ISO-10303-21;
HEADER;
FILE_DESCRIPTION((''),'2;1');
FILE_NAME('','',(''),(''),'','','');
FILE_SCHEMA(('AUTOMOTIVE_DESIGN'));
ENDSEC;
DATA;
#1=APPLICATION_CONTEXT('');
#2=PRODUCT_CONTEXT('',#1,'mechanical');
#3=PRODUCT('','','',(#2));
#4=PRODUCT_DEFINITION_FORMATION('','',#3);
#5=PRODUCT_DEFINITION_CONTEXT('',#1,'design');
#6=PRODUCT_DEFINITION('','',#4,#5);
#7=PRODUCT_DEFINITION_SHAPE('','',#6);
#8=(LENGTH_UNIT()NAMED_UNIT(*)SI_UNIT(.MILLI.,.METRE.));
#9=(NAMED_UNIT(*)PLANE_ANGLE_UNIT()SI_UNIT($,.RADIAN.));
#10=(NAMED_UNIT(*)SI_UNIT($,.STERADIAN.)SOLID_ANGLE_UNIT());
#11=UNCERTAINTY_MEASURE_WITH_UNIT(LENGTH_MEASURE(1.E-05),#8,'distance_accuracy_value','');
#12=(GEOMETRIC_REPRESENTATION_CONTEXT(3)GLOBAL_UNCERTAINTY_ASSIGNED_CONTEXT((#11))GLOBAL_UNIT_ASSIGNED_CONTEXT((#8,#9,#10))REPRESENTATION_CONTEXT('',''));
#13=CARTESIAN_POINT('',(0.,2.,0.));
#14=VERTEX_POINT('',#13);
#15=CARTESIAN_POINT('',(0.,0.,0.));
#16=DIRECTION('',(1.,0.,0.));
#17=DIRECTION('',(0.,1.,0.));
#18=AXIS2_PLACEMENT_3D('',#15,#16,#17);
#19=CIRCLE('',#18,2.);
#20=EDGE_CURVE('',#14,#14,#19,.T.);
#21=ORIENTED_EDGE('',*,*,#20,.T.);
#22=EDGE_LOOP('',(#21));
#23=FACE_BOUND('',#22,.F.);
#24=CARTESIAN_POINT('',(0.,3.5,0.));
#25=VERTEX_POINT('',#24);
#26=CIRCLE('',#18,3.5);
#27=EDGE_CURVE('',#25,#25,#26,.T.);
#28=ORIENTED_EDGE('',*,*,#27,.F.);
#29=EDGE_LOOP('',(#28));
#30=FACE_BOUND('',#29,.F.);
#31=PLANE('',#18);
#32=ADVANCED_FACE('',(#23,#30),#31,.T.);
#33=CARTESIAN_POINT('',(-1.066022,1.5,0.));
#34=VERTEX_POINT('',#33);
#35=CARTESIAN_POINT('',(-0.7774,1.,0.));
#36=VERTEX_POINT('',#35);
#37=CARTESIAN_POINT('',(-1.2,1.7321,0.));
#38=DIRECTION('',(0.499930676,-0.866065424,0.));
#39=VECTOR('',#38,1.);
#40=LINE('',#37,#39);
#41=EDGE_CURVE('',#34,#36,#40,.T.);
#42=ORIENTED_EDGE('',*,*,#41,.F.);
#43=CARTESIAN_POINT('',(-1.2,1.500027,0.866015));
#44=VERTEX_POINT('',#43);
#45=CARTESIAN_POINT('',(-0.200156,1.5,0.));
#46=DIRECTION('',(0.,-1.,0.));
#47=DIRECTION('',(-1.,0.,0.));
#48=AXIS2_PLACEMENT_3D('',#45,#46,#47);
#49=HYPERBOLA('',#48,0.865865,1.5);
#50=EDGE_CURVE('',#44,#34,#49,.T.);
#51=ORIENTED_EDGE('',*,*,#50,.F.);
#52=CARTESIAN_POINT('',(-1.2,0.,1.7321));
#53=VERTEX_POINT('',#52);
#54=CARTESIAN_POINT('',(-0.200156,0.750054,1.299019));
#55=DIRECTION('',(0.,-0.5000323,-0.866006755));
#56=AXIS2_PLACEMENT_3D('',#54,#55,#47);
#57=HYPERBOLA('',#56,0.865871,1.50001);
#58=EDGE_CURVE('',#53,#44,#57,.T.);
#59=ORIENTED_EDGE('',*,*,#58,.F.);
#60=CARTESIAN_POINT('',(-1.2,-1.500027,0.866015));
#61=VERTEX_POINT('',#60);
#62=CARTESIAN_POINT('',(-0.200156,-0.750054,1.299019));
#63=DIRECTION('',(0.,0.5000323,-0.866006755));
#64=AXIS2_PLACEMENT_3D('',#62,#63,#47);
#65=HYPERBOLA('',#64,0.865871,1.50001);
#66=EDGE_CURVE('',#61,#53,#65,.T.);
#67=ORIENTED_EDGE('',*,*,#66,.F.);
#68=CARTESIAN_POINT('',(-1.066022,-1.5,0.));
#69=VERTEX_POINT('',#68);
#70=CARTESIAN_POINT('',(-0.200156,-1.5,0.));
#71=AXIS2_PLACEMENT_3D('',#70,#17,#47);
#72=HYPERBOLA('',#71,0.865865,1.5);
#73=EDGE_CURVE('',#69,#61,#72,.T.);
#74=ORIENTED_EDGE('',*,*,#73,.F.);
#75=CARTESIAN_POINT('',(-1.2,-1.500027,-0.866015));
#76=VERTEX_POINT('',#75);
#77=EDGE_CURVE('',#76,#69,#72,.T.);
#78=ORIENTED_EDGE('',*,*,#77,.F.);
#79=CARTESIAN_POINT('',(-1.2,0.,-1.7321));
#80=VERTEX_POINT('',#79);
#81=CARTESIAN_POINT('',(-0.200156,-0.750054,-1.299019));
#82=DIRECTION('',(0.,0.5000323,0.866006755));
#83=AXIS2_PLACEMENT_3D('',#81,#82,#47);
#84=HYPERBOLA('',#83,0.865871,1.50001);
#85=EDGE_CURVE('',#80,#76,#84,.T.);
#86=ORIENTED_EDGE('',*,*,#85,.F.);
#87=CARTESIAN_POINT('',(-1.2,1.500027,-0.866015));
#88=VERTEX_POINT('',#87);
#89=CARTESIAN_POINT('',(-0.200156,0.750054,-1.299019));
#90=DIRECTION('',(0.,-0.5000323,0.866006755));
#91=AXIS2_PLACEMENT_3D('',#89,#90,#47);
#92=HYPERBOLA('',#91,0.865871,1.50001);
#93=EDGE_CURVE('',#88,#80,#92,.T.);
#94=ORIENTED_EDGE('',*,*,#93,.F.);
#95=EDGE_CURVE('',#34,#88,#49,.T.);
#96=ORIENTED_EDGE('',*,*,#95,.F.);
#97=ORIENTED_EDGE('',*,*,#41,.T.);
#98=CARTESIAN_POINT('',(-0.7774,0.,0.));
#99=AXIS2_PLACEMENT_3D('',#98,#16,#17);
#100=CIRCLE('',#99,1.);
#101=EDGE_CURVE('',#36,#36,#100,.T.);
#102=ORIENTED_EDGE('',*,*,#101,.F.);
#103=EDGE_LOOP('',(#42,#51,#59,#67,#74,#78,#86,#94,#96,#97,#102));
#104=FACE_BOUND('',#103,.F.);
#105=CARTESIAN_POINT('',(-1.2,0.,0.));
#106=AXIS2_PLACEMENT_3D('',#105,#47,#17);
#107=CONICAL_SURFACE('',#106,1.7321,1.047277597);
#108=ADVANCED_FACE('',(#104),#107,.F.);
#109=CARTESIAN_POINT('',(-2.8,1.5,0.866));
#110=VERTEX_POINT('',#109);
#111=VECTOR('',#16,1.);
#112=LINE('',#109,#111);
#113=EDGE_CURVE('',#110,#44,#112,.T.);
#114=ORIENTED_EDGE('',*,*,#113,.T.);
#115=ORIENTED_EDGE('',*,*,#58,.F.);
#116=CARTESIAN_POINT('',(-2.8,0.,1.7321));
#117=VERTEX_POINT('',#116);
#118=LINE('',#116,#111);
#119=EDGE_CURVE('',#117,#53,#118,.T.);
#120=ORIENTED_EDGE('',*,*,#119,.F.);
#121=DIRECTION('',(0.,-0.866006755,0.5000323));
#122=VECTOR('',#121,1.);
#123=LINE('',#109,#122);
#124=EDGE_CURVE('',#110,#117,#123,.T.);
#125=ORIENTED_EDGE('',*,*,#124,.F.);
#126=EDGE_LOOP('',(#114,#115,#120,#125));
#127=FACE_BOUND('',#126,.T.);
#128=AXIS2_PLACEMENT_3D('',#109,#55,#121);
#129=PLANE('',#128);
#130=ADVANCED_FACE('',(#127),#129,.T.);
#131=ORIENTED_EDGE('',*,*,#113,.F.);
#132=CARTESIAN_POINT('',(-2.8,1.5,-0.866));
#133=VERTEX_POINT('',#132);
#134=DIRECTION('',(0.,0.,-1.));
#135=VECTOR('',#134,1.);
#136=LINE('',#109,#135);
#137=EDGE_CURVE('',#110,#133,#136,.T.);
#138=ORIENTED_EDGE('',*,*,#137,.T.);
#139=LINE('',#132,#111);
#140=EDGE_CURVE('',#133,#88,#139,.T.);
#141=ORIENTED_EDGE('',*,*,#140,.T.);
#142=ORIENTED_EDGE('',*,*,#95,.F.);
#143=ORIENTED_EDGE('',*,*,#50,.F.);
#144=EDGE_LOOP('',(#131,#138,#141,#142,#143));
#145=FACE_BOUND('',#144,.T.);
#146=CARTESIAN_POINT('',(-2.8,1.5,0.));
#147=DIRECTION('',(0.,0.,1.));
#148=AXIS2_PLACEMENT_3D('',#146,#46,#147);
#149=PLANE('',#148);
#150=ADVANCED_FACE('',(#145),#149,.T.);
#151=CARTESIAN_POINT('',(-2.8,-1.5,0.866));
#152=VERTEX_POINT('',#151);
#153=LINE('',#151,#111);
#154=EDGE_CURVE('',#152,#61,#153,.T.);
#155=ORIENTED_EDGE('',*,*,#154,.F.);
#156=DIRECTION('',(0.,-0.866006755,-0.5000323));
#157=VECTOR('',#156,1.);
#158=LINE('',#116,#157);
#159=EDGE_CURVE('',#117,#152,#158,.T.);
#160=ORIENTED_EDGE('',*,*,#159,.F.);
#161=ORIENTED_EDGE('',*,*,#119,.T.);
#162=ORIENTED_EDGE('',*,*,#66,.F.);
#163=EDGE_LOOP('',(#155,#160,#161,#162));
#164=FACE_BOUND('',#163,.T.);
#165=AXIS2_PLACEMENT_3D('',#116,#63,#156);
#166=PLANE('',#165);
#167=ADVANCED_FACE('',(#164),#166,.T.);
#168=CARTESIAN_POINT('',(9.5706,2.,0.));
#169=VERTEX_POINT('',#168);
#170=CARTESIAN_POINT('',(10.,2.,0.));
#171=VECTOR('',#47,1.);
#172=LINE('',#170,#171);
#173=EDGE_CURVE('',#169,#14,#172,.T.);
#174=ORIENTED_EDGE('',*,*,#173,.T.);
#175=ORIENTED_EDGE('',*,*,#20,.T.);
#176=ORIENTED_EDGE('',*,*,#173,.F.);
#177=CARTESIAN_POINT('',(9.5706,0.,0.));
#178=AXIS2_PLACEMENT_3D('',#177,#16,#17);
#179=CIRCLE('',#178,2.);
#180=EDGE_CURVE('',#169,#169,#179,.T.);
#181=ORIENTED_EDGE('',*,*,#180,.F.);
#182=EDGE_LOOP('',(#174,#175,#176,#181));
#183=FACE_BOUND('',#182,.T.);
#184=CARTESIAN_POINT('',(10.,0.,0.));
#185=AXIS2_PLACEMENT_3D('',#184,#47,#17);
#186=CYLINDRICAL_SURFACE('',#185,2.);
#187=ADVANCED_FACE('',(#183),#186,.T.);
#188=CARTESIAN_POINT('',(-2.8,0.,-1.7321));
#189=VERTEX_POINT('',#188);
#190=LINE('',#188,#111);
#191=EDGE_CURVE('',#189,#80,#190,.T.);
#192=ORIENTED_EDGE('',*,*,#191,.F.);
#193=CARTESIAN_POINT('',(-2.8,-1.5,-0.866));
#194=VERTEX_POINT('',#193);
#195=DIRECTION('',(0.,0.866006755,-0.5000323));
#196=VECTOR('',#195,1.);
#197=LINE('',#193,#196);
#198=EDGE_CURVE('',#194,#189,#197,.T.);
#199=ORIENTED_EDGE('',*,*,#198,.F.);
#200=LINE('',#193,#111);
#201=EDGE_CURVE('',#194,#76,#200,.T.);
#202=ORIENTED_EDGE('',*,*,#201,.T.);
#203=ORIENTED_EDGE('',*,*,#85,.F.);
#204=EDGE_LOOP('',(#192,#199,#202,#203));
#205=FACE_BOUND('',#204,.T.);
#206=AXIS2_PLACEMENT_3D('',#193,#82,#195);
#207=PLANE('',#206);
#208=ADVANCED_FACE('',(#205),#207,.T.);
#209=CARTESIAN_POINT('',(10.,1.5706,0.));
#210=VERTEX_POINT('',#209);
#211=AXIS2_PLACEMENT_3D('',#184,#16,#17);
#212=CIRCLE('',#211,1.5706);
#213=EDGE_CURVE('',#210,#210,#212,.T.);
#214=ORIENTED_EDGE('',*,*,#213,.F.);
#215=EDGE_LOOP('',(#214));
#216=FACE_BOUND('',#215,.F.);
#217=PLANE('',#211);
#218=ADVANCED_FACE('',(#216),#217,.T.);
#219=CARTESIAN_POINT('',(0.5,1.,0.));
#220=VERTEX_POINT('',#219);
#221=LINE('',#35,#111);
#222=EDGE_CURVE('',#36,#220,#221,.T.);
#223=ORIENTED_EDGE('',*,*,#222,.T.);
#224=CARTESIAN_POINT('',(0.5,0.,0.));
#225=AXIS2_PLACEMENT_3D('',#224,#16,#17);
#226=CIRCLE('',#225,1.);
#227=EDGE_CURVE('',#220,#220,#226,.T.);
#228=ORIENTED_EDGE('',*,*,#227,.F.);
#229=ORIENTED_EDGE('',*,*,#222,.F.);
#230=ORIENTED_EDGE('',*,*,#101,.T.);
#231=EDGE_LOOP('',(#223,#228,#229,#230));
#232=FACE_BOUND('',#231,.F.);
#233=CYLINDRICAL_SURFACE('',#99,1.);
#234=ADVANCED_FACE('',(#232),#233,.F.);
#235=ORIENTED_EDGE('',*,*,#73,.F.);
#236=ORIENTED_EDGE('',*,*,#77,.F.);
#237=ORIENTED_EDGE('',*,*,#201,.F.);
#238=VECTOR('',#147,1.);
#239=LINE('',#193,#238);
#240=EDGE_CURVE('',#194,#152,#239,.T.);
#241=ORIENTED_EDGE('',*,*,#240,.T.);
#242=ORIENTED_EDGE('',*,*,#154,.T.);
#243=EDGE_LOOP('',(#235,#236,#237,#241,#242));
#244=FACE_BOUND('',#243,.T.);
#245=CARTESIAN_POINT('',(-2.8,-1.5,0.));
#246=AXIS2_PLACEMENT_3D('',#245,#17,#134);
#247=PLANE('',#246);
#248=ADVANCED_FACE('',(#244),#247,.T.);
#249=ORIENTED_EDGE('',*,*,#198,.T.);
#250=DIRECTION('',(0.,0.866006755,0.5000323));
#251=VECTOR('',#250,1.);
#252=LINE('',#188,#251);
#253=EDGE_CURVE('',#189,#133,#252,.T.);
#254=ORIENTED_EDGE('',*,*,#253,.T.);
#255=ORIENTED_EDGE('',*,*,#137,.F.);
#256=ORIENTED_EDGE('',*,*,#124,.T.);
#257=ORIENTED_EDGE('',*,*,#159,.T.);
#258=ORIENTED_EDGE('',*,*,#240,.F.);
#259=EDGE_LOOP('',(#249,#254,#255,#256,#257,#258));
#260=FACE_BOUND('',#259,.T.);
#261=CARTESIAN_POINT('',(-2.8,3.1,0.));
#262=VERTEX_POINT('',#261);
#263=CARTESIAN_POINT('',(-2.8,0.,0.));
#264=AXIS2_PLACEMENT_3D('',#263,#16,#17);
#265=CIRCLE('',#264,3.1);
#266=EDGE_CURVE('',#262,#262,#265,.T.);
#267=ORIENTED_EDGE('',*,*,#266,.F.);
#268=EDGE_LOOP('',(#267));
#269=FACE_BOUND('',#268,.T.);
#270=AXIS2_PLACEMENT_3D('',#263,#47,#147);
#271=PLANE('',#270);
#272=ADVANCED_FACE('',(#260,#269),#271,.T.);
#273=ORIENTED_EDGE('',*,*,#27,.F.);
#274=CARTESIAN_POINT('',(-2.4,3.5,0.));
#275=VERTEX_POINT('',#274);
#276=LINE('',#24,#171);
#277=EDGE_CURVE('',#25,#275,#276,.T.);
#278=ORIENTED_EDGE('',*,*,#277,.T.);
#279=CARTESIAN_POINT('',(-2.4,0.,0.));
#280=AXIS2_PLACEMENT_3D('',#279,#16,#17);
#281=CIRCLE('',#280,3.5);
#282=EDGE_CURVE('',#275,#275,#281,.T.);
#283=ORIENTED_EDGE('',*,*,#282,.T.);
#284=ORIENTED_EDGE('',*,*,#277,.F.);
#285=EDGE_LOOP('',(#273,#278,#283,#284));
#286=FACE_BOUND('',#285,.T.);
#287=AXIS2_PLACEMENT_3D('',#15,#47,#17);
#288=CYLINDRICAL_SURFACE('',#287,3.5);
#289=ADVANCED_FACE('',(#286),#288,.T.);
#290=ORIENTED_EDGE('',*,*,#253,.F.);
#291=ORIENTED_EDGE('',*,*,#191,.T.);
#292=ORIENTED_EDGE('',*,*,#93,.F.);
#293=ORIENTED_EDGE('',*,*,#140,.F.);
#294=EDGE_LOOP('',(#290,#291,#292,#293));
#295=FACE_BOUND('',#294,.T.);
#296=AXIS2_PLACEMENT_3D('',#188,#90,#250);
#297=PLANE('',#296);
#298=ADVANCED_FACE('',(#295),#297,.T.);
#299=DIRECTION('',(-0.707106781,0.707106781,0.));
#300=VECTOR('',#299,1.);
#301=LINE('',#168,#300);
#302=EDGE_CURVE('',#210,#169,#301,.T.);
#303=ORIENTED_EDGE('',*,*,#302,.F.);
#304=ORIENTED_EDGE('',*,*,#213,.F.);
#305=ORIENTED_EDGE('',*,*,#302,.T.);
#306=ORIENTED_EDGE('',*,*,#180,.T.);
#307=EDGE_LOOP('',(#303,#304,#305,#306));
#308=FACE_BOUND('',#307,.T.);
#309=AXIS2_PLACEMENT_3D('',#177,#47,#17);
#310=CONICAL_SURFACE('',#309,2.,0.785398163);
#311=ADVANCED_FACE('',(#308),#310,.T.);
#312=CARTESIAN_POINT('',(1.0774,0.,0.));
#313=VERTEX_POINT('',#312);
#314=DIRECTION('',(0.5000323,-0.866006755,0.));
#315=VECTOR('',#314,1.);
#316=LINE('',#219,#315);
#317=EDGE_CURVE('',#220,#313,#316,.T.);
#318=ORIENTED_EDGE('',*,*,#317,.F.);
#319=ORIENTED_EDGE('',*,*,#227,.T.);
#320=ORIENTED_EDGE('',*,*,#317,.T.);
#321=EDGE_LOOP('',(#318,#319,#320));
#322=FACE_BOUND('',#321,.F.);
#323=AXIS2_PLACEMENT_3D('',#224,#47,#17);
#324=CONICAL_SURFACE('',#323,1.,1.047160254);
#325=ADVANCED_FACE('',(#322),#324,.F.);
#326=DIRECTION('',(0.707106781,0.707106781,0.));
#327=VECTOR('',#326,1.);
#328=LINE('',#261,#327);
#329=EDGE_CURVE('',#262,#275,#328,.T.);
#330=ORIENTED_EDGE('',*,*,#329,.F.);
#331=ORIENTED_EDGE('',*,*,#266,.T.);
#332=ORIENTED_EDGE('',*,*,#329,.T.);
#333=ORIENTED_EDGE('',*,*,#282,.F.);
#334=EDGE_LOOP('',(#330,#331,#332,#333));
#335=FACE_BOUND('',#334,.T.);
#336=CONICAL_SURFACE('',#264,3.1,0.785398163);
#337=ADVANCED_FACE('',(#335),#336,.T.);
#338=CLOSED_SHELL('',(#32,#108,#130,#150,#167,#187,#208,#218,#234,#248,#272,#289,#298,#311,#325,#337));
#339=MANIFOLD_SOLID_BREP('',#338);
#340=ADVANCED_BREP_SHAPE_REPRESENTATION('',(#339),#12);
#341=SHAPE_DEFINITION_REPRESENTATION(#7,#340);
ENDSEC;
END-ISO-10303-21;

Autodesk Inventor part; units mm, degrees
ref_plane "YZ Plane" through (0, 0, 0) normal (1, 0, 0) x (0, 1, 0)
ref_plane "XZ Plane" through (0, 0, 0) normal (0, 1, 0) x (-1, 0, 0)
sketch "Sketch1" plane through (0, 0, 0) normal (0, 0, 1) x (1, 0, 0)
  line L0 (1.0774, 0) -> (10, 0)
  line L1 (10, 0) -> (10, 2)
  line L2 (10, 2) -> (0, 2)
  line L3 (0, 2) -> (0, 3.5)
  line L4 (0, 3.5) -> (-2.8, 3.5)
  line L5 (-2.8, 3.5) -> (-2.8, 1.7321)
  line L6 (-2.8, 1.7321) -> (-1.2, 1.7321)
  line L7 (-1.2, 1.7321) -> (-0.7774, 1)
  line L8 (-5.36, 0) -> (12.56, 0) projected
  line L9 (0, -0.7) -> (0, 4.2) projected
  line L10 (-0.7774, 1) -> (0.5, 1)
  line L11 (0.5, 1) -> (1.0774, 0)
  line L12 (-2.8, 1.7321) -> (-2.8, 0) construction
  line L13 (-2.8, 3.1) -> (-2.4, 3.5)
  dimension "d0" = 2.8
  dimension "d1" = 1.6
  dimension "d2" = 60
  dimension "d3" = 4
  dimension "d4" = 3.4641
  dimension "d5" = 7
  dimension "d15" = 3.3
  dimension "d16" = 2
  dimension "d17" = 10
  dimension "d32" = 45
  dimension "d33" = 0.4
revolve "Body" add sketch "Sketch1" angle 360 about axis through (1.0774, 0, 0) along (1, 0, 0) contours L11 L10 L9 L2 L1 L0 | L10 L7 L6 L5 L13 L4 L3 L9 | L13 L5 L4
revolve "Chamfer2" cut sketch "Sketch1" angle 360 about axis through (-10, 0, 0) along (1, 0, 0) contours L13 L5 L4
sketch "Sketch2" plane through (-2.8, 0, 0) normal (-1, 0, 0) x (0, 0, 1)
  circle A0 centre (0, 0) radius 1.7321 projected
  line L0 (0, -4.9) -> (0, 4.9) projected
  line L1 (-4.9, 0) -> (4.9, 0) projected
  line L2 (1.7321, 0) -> (0.866, -1.5)
  line L3 (0.866, -1.5) -> (-0.866, -1.5)
  line L4 (-0.866, -1.5) -> (-1.7321, 0)
  line L5 (-1.7321, 0) -> (-0.866, 1.5)
  line L6 (-0.866, 1.5) -> (0.866, 1.5)
  line L7 (0.866, 1.5) -> (1.7321, 0)
extrude "Slot" add sketch "Sketch2" against normal up to next contours L7 A0 | A0 L2 | L6 L0 A0 | A0 L0 L3 | L0 L6 A0 | A0 L3 L0 | L4 A0 | A0 L5
thread "Thread" size "M4x0.7" class "6g" standard "ISO Metric profile" length 6.5
chamfer "Chamfer1" distance 0.4294 distance2 0.4294 1 edges at (10, -2, 0) measured on face at (10, 0.556, 0.0273)
ref_plane "Work Plane1" through (5, 0, 0) normal (0, 0.5, 0.8660254) x (1, 0, 0)
equation "\"d0\" = KOH"
equation "\"d1\" = INTI"
equation "\"d3\" = GD"
equation "\"d4\" = 1.1547 * SW"
equation "\"d5\" = KOD"
equation "\"d15\" = INFT"
equation "\"d16\" = SDT"
equation "\"d17\" = NLG"
equation "\"d33\" = Cham"
equation "\"d7\" = GEL"
equation "\"d9\" = -0.5 * SPD + 0.5 * GD"
equation "\"d12\" = GUL"
equation "\"GD\" = NND"
equation "\"NLG\" = 10"
equation "\"GEL\" = 6.5"
equation "\"KOD\" = 7"
equation "\"KOH\" = 2.8"
equation "\"GUL\" = 0.61345 * PTC"
equation "\"SW\" = 3"
equation "\"INTI\" = 1.6"
equation "\"SPD\" = NND - 1.2269 * PTC"
equation "\"SDT\" = 2"
equation "\"INFT\" = 3.3"
equation "\"Cham\" = 0.4"
equation "\"TOA\" = 30deg"
equation "\"GD1\" = THREADDIA - 1.2269 * PTC"
equation "\"THREADDIA\" = 4"
equation "\"BDM\" = NND"
equation "\"FAWI\" = 45deg"
equation "\"RR\" = 0.1 * NND"
equation "\"PTC\" = 0.7"
equation "\"NND\" = 4"
equation "\"FAWI1\" = 45deg"
equation "\"GAL\" = 0.61345 * PTC"
equation "\"E0\" = 1.155 * SW"
properties part number "DIN 6912 - M4 x 10" material "Steel, Mild"
